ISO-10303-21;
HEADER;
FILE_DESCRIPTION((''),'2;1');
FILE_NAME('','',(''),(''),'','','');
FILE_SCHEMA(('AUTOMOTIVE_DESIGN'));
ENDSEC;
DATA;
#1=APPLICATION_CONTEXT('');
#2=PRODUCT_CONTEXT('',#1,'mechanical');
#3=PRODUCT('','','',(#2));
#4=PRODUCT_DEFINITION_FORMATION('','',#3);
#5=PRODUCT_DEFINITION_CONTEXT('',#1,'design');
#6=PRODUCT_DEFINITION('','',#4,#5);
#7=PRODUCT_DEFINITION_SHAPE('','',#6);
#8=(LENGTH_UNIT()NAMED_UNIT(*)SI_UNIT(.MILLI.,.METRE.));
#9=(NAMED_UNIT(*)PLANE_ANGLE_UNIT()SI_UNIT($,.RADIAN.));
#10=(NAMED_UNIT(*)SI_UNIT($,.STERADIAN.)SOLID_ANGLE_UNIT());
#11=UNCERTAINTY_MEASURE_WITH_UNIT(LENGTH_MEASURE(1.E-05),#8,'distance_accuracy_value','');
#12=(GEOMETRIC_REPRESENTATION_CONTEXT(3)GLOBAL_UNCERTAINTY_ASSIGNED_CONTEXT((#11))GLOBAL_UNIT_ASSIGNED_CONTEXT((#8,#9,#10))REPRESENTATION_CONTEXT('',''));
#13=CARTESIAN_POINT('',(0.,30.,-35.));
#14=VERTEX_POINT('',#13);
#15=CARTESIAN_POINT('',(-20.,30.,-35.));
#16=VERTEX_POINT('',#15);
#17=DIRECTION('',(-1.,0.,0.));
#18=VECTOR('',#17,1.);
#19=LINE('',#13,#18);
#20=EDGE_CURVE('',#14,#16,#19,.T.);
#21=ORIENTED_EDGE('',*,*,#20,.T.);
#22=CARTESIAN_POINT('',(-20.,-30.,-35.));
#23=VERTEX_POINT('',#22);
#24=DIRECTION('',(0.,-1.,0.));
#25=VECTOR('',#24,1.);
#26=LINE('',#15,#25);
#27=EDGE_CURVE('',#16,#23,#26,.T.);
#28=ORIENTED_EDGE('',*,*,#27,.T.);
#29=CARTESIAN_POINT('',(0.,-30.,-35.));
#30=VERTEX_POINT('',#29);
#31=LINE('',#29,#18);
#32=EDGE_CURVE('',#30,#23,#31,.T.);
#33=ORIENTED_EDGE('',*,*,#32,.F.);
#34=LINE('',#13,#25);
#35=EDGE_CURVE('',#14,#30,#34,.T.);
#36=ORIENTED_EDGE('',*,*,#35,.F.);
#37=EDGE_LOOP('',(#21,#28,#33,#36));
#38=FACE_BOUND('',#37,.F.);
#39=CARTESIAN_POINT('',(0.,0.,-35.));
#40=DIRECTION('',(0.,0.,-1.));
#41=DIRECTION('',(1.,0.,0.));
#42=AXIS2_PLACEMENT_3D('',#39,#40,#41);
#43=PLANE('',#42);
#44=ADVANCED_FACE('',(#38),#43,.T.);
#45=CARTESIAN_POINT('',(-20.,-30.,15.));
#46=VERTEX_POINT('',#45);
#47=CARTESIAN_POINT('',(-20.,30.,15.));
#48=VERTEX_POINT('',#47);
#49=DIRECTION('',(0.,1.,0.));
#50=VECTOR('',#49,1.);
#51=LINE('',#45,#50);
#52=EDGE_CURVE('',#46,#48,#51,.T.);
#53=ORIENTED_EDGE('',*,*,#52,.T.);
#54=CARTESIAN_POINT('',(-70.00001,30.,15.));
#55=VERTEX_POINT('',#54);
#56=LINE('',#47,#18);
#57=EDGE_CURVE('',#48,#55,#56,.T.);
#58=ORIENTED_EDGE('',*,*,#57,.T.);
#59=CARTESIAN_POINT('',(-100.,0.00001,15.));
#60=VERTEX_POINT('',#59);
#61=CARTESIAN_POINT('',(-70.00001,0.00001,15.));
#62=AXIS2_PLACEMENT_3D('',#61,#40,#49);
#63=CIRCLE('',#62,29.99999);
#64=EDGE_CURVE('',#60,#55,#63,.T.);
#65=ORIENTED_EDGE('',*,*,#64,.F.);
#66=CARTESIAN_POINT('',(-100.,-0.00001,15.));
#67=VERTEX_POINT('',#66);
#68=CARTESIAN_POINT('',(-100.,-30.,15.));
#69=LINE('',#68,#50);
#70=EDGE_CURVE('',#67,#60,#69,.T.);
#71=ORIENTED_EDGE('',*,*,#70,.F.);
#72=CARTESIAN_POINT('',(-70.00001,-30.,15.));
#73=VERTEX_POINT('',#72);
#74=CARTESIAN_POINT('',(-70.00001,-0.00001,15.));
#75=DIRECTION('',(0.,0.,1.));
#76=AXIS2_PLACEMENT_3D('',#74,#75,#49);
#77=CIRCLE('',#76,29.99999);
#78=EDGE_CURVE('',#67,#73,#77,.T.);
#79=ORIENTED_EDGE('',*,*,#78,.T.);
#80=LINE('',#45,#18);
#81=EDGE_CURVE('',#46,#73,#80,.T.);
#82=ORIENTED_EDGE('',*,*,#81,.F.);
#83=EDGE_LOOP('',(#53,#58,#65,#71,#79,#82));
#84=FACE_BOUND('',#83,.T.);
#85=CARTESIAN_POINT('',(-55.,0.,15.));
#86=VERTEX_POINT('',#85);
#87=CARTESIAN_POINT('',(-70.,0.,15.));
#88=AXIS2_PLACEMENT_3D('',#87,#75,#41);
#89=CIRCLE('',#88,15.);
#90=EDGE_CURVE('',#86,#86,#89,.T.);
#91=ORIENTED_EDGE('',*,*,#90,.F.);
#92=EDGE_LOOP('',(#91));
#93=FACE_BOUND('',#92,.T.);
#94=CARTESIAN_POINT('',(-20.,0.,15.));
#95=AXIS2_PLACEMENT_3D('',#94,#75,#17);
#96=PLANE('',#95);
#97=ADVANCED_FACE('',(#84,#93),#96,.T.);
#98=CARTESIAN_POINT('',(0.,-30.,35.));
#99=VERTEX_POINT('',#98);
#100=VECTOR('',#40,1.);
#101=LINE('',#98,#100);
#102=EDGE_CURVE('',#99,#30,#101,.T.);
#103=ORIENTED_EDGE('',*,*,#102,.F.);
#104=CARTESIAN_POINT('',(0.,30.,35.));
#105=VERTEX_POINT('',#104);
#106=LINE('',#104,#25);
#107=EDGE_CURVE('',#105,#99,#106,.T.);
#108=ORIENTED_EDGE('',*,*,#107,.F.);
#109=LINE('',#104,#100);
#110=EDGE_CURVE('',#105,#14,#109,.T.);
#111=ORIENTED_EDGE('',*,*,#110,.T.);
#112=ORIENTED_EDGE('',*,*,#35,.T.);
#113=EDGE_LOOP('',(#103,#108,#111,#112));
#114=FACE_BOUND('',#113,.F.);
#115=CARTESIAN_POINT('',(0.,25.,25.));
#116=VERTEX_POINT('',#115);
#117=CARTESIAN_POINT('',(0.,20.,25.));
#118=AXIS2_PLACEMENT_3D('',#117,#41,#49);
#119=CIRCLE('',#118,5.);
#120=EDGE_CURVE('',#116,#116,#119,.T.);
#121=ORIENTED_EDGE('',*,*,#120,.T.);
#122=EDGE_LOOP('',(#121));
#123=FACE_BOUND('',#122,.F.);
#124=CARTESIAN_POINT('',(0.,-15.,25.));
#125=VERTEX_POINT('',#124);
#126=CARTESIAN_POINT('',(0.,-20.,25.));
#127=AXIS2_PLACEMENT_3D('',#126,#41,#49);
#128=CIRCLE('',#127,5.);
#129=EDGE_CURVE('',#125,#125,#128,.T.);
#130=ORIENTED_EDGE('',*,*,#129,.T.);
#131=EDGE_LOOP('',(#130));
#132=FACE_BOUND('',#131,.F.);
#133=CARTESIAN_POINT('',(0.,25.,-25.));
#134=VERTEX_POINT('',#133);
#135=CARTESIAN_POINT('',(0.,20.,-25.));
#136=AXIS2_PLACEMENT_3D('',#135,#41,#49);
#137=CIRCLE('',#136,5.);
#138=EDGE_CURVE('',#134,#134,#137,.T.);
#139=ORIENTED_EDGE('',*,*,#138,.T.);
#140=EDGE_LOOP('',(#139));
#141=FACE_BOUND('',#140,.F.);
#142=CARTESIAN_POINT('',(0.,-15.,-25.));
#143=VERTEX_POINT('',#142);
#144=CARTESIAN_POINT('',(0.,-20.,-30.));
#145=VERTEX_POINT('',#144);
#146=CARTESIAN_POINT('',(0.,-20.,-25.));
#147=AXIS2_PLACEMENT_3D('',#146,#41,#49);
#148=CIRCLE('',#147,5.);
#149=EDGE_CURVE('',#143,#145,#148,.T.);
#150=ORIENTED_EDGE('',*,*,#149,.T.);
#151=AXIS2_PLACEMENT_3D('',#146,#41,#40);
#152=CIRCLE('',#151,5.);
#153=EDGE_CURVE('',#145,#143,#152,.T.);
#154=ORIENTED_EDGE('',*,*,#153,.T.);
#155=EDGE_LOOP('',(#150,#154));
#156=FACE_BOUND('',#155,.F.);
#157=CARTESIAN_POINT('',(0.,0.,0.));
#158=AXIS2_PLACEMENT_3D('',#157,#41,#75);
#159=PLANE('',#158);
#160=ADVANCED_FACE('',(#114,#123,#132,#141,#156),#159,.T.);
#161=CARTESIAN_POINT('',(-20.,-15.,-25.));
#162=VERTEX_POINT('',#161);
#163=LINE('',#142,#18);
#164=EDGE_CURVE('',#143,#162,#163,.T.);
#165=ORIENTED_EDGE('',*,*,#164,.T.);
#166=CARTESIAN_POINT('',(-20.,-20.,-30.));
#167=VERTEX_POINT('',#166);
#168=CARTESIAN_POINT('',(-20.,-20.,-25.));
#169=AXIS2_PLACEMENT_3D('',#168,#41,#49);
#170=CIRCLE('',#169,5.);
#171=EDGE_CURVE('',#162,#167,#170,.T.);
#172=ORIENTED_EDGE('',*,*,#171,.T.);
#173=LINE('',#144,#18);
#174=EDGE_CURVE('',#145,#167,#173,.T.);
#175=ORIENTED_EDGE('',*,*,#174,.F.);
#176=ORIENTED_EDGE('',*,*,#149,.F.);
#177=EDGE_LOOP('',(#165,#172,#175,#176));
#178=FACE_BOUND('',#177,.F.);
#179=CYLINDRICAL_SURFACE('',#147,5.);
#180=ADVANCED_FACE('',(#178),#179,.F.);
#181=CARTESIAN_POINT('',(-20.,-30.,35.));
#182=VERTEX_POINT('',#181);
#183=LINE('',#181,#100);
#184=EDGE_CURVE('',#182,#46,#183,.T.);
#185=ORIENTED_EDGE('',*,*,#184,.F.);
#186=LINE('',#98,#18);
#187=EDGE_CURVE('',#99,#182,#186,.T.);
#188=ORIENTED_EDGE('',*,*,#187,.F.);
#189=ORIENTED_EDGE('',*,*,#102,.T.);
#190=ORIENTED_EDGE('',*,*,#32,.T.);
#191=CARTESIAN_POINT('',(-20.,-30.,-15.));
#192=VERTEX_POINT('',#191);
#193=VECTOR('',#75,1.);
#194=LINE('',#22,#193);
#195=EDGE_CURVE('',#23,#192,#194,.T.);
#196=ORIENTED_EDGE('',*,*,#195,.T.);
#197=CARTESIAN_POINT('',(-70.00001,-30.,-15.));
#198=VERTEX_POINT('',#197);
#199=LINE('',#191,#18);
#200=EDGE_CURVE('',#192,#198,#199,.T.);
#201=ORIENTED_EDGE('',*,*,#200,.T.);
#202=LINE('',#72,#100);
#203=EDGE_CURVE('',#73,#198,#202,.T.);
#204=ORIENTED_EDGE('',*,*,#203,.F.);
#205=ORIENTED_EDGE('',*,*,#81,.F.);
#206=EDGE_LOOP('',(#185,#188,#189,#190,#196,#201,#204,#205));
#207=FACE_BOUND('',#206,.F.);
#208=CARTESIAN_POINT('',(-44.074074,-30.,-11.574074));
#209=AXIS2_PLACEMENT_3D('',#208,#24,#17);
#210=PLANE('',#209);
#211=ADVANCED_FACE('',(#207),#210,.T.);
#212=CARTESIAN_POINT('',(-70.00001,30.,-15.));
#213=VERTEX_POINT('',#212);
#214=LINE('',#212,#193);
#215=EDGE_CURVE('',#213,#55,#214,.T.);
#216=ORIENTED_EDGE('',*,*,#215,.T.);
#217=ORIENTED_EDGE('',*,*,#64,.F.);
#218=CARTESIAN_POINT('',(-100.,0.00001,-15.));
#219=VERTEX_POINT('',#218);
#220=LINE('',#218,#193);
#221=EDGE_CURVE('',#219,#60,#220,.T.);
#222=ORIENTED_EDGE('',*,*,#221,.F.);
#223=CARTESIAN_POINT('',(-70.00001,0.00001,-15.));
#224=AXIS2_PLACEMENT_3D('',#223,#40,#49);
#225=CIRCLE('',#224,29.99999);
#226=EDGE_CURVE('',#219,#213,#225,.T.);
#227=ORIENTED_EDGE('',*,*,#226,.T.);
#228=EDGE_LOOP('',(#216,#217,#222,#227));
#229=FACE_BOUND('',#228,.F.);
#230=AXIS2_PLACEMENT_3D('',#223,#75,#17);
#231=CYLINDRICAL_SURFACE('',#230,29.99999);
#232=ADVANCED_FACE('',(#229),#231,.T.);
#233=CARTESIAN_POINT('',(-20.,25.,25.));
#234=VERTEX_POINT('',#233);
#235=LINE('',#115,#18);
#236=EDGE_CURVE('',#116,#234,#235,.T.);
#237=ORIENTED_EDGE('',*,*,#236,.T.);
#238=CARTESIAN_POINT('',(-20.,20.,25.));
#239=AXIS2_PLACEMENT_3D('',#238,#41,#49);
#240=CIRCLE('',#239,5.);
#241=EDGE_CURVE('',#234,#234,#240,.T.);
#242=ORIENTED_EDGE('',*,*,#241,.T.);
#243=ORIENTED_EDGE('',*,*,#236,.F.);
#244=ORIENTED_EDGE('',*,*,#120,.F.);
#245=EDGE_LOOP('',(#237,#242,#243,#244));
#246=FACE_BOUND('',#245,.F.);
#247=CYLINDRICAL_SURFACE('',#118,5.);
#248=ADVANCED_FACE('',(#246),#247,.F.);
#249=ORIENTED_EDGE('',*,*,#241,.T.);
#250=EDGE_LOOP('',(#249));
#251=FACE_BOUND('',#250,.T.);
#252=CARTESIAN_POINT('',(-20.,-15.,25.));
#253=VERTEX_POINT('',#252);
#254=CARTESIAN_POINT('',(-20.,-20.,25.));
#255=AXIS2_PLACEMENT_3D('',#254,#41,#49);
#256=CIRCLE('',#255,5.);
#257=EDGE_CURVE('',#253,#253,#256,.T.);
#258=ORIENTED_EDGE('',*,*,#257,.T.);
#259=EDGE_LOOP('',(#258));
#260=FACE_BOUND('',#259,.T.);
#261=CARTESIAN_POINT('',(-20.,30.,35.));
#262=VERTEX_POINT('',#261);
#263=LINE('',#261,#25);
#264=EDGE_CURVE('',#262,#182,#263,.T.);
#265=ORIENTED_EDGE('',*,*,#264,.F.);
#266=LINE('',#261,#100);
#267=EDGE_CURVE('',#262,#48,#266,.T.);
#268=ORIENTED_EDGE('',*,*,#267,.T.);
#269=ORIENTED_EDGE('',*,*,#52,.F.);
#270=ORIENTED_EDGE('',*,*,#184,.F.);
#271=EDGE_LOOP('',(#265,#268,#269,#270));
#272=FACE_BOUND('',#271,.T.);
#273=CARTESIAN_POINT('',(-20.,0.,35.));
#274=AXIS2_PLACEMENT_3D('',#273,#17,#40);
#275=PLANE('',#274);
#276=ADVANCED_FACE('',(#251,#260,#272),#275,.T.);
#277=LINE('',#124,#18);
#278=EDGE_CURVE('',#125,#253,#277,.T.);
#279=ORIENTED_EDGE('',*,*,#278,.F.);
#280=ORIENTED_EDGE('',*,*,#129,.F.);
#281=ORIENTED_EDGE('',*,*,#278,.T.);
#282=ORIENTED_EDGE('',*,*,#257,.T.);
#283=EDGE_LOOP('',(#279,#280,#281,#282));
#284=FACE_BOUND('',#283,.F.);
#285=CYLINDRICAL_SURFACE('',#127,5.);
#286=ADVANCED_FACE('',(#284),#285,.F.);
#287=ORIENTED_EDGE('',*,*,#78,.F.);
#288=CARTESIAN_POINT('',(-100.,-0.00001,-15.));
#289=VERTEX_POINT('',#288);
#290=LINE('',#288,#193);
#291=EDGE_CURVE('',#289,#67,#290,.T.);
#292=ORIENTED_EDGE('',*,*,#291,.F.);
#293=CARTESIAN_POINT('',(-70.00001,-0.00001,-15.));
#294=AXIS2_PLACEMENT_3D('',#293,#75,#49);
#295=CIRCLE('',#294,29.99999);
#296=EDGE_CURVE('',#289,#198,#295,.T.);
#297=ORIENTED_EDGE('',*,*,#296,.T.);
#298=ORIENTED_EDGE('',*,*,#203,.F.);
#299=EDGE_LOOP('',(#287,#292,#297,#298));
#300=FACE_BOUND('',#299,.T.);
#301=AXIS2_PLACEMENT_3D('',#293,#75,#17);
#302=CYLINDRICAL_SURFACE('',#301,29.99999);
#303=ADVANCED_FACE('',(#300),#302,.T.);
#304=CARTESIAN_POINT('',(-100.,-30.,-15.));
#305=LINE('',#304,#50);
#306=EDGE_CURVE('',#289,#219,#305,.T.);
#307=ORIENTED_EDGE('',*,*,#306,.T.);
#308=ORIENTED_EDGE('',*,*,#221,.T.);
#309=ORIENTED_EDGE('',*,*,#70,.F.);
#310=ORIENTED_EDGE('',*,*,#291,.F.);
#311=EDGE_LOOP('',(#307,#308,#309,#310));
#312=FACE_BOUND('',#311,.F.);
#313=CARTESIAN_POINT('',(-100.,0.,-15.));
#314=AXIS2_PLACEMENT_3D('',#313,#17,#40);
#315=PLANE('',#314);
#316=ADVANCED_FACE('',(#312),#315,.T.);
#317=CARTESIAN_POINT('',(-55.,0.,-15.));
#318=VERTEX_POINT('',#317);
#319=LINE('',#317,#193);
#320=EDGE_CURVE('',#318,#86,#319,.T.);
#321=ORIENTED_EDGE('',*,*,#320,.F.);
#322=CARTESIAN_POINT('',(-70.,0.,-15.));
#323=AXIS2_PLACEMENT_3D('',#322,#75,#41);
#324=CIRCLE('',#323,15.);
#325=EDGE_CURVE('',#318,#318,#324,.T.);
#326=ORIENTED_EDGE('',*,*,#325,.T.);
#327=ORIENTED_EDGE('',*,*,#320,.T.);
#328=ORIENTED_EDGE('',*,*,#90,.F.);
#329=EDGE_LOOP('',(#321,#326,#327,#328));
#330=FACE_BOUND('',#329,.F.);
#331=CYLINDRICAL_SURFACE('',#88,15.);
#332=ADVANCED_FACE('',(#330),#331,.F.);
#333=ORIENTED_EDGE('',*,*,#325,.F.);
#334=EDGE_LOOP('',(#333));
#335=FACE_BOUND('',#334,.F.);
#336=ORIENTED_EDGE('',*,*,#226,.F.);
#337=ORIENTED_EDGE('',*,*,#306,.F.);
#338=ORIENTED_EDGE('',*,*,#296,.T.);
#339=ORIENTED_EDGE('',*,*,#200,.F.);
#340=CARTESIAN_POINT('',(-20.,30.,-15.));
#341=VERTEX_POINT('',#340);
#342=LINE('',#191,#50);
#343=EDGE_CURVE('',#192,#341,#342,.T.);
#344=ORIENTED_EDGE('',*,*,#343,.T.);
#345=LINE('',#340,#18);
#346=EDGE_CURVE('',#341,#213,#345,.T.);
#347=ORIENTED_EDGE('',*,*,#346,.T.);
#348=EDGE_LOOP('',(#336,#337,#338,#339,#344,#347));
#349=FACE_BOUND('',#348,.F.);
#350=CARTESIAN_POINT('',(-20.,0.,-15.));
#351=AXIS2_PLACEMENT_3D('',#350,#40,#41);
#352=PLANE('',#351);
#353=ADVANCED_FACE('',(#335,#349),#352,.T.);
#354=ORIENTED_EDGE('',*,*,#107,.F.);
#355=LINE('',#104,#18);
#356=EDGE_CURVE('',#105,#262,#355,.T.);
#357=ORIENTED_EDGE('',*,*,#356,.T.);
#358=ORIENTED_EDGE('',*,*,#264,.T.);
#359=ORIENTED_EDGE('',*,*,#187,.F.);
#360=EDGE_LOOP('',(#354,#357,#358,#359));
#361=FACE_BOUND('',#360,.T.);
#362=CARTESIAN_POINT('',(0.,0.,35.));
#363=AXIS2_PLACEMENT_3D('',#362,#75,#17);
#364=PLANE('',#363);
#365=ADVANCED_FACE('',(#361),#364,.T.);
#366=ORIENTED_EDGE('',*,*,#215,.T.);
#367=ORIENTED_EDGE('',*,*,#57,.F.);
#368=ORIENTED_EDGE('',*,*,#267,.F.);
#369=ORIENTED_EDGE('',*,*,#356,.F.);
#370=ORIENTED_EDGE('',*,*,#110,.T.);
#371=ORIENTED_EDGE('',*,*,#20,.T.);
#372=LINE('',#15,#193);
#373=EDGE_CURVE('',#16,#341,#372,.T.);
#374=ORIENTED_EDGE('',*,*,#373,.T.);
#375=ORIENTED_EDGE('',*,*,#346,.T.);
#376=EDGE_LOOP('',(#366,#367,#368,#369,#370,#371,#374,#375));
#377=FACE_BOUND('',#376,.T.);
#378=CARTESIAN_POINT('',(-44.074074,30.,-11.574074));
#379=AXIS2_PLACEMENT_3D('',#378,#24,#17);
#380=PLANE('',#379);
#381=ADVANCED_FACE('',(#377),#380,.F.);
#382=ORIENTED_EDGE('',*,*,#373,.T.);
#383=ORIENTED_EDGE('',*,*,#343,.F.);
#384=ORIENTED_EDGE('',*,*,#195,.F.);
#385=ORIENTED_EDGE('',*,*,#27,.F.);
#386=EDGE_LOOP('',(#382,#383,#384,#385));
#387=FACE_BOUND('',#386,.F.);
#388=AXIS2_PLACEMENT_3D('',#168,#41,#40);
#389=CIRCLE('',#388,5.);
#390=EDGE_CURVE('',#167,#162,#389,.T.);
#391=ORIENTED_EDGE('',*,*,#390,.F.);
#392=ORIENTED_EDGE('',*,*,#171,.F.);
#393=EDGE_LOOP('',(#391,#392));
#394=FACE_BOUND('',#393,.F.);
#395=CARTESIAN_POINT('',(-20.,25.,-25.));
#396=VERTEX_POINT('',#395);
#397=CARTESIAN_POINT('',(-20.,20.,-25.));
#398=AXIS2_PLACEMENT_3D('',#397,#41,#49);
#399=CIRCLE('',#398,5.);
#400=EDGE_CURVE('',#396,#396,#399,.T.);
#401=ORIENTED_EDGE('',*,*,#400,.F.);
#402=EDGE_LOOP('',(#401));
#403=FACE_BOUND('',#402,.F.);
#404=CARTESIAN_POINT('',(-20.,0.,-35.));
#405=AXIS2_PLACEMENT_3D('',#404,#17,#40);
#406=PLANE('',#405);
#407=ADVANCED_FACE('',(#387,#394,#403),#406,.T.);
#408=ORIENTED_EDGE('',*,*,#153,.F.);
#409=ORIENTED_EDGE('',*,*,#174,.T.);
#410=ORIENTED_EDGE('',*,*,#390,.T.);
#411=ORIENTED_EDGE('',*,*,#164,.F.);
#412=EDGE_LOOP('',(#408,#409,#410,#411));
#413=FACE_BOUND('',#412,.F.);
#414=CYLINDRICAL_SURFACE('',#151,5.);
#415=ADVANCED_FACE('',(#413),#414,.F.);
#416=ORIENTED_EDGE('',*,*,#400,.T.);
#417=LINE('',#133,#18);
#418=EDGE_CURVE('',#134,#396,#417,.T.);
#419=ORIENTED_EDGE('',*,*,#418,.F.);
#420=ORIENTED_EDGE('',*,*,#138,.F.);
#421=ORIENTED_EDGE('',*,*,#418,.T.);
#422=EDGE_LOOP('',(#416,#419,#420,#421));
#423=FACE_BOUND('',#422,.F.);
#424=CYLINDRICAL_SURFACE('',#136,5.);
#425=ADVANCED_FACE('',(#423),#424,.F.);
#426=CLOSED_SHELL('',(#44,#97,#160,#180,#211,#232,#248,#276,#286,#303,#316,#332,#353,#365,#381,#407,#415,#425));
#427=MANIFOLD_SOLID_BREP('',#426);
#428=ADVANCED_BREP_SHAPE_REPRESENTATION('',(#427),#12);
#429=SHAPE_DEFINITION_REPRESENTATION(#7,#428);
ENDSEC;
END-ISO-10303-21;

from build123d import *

# Parameters (mm, degrees)
F1_DEPTH = 30
F2_R     = 29.99999
F3_R     = 15
F4_DEPTH = 15
F6_R     = 5
F7_DEPTH = 20


# Not quite as in the source:
# - a fillet or chamfer is up to 0.001 mm smaller than in the source, because OpenCascade refuses the exact size


with BuildPart() as f1:
    # F0 (on Front) → F1 (new body, symmetric)
    with BuildSketch(Plane.XZ):
        Polygon((-100, 0), (0, 0), (0, 35), (-20, 35), (-20, 15), (-100, 15), align=None)
    extrude(amount=F1_DEPTH, both=True)

    # F2 (radius 30 in the source; OpenCascade refuses exactly that, so slightly less here)
    f2_edges = [f1.edges().sort_by_distance(p)[0] for p in [
        (-100, -30, 7.5),
        (-100, 30, 7.5),
    ]]
    fillet(f2_edges, radius=F2_R)

    # F3 (on face) → F4 (cut, through all)
    with BuildSketch(Plane.XY.offset(15)):
        with Locations((-70, 0)):
            Circle(F3_R)
    extrude(amount=-F4_DEPTH, mode=Mode.SUBTRACT)

    # F5: F1 across plane


with BuildPart() as f1_1:
    add(f1.part)
    add(f1.part.mirror(Plane.XY))

    # F6 (on face) → F7 (cut, through all)
    with BuildSketch(Plane.YZ):
        with BuildLine():
            ThreePointArc((-20, -30), (-16.4644660941, -28.5355339059), (-15, -25))
            ThreePointArc((-15, -25), (-23.5355339059, -21.4644660941), (-20, -30))
        make_face()
        with Locations((-20, 25)):
            Circle(F6_R)
        with Locations((20, -25)):
            Circle(F6_R)
        with Locations((20, 25)):
            Circle(F6_R)
    extrude(amount=-F7_DEPTH, mode=Mode.SUBTRACT)


solid = f1_1.part
